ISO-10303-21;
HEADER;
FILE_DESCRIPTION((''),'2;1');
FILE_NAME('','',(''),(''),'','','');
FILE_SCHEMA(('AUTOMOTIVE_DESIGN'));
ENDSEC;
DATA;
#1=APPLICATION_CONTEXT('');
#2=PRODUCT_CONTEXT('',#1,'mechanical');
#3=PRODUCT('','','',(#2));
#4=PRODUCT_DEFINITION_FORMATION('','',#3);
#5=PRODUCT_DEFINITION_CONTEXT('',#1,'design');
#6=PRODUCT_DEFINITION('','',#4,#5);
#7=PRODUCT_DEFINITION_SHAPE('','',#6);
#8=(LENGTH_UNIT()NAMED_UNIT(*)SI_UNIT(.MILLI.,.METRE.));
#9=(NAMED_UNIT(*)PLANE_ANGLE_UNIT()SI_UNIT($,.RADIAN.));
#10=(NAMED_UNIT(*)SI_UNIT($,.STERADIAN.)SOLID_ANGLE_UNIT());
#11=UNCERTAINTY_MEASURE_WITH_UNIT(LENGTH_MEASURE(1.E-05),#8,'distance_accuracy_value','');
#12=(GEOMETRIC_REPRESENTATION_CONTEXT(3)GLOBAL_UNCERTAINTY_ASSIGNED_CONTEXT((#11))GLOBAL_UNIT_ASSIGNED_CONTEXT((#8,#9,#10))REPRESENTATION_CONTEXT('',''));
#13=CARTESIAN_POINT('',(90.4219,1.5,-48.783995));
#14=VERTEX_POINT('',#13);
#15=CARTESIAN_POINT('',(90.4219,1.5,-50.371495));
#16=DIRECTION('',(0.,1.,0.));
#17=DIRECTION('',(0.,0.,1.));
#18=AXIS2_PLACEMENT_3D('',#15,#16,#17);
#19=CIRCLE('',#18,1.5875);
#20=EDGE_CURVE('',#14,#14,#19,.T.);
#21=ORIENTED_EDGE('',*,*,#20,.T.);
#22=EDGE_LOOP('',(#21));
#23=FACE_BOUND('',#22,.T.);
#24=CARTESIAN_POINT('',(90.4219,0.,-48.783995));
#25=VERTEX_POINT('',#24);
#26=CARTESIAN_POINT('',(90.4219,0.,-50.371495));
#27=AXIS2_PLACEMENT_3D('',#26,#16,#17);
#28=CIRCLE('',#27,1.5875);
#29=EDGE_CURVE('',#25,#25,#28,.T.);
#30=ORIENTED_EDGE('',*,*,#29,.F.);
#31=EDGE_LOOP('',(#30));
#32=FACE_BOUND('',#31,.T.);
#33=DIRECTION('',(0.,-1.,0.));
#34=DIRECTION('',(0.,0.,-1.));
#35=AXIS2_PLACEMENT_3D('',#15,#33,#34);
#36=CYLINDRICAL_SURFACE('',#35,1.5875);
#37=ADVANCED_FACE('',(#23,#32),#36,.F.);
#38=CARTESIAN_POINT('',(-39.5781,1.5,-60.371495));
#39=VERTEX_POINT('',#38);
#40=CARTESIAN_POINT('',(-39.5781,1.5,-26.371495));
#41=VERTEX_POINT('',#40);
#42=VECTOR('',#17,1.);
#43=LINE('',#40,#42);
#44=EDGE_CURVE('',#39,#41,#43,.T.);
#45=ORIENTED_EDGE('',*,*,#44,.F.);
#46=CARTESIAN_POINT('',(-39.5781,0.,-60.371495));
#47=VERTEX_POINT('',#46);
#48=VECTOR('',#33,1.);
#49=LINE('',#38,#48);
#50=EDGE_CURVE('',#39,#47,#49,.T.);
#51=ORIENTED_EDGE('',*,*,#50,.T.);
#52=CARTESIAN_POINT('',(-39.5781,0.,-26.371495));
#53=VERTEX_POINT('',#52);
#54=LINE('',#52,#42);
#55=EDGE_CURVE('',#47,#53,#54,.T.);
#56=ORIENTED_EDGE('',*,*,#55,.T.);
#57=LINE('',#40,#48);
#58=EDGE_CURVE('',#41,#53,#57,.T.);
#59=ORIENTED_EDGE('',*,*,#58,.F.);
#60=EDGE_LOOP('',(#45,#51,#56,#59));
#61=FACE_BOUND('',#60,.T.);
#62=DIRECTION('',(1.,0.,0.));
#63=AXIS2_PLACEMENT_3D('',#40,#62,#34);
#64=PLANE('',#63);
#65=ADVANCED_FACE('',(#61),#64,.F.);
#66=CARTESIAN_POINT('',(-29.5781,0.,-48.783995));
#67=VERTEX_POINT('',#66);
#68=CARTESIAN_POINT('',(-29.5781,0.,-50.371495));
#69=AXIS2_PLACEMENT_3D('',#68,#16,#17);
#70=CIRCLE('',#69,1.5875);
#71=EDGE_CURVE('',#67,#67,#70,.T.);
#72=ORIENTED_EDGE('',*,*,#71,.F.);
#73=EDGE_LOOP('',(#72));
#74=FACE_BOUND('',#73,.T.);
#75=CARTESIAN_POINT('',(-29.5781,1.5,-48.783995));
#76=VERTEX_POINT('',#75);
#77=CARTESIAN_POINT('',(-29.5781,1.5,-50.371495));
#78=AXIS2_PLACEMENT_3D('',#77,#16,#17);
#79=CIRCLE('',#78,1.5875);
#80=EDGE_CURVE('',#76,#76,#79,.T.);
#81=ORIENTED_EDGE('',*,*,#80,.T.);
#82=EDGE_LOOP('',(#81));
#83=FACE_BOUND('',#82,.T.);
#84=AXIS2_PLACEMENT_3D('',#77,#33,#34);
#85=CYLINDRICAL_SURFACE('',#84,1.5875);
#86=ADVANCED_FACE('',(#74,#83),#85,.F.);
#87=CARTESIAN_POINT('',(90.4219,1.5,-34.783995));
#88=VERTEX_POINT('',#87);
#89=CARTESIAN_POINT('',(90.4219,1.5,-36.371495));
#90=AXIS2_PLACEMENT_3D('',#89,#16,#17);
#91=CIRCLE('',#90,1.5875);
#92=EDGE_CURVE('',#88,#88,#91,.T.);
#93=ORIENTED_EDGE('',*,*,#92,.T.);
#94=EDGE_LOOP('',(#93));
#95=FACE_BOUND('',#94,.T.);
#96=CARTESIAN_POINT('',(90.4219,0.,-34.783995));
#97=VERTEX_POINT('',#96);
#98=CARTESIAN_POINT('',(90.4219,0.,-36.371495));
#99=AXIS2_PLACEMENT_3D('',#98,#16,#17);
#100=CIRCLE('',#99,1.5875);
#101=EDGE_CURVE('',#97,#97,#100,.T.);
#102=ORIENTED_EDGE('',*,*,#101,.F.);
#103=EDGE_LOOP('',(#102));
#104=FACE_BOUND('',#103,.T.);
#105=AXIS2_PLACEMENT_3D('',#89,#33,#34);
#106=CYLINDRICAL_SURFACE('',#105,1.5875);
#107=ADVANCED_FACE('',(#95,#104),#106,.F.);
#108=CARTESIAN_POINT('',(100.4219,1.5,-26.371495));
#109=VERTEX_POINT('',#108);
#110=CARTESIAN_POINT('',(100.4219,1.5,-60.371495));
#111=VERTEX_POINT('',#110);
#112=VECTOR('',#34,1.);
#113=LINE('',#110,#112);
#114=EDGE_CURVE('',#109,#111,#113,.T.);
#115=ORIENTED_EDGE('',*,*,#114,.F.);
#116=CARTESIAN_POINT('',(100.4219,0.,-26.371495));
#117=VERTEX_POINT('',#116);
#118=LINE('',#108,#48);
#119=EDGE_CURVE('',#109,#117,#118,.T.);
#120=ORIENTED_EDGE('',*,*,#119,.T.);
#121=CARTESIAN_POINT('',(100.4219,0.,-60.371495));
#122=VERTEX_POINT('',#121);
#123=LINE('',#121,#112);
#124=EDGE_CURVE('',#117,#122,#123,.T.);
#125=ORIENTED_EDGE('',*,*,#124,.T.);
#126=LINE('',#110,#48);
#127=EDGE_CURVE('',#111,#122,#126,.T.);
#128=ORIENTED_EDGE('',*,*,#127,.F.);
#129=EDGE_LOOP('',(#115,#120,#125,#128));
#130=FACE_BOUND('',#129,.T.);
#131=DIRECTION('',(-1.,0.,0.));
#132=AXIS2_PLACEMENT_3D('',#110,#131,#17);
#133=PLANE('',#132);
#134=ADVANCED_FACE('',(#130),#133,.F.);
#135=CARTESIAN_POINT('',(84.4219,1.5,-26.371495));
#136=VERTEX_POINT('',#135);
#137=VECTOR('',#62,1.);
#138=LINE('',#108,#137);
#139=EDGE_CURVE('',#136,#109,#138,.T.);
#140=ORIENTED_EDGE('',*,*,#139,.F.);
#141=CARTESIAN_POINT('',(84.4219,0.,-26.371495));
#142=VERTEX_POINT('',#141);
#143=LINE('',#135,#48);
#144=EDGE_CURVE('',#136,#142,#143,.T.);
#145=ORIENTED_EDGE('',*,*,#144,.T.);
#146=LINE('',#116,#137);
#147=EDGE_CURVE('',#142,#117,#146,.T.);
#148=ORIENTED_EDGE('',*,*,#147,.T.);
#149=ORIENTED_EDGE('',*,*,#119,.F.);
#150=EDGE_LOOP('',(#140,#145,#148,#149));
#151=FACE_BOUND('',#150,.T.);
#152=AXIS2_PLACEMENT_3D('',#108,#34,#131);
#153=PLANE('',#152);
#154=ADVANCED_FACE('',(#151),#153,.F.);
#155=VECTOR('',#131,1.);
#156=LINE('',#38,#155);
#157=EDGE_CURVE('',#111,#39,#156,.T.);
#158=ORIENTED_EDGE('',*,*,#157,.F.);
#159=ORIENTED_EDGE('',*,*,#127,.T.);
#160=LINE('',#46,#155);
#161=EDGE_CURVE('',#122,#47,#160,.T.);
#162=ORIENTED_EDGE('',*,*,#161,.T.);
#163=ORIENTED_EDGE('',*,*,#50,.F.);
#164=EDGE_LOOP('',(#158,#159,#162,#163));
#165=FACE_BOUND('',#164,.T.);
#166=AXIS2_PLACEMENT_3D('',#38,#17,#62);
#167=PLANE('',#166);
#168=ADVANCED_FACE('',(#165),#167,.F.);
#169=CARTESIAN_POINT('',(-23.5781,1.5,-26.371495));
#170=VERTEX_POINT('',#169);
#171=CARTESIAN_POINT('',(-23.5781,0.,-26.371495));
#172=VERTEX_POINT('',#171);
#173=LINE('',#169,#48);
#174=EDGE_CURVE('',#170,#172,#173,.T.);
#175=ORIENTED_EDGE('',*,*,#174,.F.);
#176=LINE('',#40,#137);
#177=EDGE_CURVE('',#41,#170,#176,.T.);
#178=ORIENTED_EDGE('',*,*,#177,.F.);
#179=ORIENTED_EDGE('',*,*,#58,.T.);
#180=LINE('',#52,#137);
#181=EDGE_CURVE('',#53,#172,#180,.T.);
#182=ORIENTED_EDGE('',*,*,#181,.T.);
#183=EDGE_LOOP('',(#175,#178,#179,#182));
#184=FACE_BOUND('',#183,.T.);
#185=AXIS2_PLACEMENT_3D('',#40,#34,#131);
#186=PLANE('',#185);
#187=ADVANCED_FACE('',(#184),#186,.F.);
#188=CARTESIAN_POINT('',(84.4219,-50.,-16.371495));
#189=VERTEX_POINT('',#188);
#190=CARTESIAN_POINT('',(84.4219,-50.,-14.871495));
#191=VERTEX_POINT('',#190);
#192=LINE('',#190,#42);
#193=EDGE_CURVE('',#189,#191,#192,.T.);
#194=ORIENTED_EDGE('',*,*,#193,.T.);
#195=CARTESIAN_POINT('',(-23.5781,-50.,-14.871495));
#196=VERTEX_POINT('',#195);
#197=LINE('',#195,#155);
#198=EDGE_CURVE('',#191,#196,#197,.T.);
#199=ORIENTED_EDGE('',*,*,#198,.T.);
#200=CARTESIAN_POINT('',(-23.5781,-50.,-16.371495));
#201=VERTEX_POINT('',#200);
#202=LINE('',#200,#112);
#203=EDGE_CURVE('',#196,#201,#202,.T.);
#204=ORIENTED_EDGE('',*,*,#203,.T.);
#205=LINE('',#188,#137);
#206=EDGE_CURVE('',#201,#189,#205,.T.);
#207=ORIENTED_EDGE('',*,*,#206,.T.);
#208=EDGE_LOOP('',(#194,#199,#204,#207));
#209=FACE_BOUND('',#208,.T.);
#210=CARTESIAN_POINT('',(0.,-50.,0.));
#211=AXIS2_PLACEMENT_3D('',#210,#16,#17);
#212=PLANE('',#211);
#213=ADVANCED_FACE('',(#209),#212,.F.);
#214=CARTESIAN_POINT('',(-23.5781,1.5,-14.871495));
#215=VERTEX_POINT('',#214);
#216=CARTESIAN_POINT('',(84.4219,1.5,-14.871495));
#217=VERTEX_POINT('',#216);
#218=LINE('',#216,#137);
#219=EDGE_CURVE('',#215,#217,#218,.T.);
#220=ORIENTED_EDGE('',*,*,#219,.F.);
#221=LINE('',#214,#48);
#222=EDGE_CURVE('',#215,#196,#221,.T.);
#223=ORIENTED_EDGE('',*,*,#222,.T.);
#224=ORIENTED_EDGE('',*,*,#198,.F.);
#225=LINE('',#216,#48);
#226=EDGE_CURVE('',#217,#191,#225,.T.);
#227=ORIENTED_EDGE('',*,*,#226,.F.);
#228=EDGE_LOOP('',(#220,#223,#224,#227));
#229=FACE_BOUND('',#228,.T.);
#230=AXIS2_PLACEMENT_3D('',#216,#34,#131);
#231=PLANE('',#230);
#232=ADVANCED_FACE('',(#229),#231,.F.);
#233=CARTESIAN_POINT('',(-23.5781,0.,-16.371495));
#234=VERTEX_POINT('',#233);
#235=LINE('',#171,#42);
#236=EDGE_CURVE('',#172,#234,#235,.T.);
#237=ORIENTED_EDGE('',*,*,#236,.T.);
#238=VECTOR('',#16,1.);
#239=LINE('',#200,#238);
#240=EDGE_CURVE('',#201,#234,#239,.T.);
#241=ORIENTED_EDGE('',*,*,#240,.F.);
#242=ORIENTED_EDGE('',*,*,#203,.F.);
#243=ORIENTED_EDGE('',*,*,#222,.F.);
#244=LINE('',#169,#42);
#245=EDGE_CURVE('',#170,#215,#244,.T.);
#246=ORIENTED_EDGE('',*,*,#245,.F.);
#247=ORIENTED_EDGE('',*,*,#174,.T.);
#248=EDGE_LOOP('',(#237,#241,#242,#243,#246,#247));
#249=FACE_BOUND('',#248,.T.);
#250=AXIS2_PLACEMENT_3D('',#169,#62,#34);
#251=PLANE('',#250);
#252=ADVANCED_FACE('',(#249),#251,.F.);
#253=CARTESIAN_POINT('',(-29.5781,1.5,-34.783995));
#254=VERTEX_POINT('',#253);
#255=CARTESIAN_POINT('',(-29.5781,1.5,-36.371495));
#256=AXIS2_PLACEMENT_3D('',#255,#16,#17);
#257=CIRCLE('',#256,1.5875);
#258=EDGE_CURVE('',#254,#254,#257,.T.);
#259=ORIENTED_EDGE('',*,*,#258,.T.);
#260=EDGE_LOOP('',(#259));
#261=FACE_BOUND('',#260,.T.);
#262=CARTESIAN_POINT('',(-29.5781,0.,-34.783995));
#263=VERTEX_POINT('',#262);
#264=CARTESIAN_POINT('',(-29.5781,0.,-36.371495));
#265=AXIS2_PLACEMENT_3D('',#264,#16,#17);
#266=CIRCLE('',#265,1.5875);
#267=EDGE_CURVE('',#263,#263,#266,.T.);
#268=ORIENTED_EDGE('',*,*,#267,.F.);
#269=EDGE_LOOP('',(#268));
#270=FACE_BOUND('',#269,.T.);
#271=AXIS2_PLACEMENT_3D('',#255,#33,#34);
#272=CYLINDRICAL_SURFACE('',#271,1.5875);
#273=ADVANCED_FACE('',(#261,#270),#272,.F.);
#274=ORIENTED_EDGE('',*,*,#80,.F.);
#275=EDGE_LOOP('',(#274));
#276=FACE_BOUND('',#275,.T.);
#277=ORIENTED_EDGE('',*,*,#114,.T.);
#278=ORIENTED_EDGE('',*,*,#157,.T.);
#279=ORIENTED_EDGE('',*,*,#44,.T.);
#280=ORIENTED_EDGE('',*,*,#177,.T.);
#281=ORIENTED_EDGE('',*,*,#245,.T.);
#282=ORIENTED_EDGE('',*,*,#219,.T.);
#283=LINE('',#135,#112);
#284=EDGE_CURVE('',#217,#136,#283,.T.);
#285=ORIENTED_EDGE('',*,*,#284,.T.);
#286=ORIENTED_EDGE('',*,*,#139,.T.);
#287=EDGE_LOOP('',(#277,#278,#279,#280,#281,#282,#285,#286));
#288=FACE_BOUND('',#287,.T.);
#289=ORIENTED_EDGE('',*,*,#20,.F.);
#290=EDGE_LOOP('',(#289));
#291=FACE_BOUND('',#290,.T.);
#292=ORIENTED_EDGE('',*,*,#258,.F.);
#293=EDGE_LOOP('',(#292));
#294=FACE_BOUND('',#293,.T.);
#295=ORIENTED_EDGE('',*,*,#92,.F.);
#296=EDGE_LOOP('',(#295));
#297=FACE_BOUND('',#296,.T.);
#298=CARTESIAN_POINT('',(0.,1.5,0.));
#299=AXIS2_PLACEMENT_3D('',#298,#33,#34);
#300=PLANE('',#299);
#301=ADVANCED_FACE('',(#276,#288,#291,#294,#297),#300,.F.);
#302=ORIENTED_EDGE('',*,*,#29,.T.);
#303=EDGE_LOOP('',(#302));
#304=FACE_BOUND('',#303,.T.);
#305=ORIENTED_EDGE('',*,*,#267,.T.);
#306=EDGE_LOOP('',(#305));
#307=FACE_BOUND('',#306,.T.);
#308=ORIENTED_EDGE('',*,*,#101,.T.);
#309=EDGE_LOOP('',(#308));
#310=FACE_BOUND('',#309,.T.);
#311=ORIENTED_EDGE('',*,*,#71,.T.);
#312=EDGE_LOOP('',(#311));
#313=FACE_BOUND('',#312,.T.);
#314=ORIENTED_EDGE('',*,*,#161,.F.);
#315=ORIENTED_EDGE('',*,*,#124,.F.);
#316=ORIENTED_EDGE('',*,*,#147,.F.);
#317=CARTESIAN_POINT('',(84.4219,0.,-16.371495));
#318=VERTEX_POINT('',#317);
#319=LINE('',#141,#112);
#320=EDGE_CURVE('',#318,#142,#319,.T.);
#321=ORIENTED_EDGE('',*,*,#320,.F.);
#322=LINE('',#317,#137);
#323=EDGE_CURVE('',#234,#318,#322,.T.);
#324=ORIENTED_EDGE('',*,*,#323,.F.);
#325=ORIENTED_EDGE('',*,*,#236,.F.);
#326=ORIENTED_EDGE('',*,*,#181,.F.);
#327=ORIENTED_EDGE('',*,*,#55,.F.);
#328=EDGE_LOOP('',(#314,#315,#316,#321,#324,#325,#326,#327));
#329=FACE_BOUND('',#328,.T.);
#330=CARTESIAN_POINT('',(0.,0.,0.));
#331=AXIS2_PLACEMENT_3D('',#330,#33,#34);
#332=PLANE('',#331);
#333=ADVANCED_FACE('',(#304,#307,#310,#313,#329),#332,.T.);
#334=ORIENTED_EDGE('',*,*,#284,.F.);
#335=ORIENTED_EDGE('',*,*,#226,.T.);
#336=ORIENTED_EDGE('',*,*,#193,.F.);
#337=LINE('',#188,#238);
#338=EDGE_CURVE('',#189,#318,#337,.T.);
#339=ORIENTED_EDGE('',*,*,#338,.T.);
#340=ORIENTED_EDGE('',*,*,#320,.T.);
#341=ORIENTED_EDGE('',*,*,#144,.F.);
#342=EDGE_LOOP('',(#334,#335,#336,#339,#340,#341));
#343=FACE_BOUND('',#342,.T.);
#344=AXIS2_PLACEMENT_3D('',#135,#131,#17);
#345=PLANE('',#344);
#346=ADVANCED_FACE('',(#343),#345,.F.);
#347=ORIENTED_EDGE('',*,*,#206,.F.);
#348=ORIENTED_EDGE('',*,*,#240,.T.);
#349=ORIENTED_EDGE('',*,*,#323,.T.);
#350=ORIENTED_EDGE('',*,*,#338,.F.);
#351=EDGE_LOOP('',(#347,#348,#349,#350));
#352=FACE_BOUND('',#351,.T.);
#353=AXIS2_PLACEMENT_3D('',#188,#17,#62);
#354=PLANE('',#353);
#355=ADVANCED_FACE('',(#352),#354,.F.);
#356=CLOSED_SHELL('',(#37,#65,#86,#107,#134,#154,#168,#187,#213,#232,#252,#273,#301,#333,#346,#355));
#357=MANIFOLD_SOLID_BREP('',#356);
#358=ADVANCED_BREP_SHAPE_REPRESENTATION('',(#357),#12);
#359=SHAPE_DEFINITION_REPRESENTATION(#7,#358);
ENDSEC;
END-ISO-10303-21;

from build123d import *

# Parameters (mm, degrees)
BOSS_EXTRUDE1_OUTLINE_R = 1.5875
BOSS_EXTRUDE1_DEPTH     = 1.5
SKETCH2_W               = 108
SKETCH2_H               = 1.5
BOSS_EXTRUDE2_DEPTH     = 50


# Read off the part's stored shape, not the designer's step: Boss-Extrude1
with BuildPart() as part:
    # Boss-Extrude1 outline → Boss-Extrude1 (new body)
    with BuildSketch(Plane(origin=(0, 0, 0), x_dir=(1, 0, 0), z_dir=(0, 1, 0))):
        Polygon((84.421900247, 14.871495129), (84.421900247, 26.371495129), (100.421900247, 26.371495129), (100.421900247, 60.371495129), (-39.578099753, 60.371495129), (-39.578099753, 26.371495129), (-23.578099753, 26.371495129), (-23.578099753, 14.871495129), align=None)
        with Locations((-29.578099753, 36.371495129)):
            Circle(BOSS_EXTRUDE1_OUTLINE_R, mode=Mode.SUBTRACT)
        with Locations((90.421900247, 36.371495129)):
            Circle(BOSS_EXTRUDE1_OUTLINE_R, mode=Mode.SUBTRACT)
        with Locations((-29.578099753, 50.371495129)):
            Circle(BOSS_EXTRUDE1_OUTLINE_R, mode=Mode.SUBTRACT)
        with Locations((90.421900247, 50.371495129)):
            Circle(BOSS_EXTRUDE1_OUTLINE_R, mode=Mode.SUBTRACT)
    extrude(amount=BOSS_EXTRUDE1_DEPTH)

    # Sketch2 → Boss-Extrude2 (add)
    with BuildSketch(Plane.XZ):
        with Locations((30.421900247, -15.621495129)):
            Rectangle(SKETCH2_W, SKETCH2_H)
    extrude(amount=BOSS_EXTRUDE2_DEPTH)


solid = part.part
